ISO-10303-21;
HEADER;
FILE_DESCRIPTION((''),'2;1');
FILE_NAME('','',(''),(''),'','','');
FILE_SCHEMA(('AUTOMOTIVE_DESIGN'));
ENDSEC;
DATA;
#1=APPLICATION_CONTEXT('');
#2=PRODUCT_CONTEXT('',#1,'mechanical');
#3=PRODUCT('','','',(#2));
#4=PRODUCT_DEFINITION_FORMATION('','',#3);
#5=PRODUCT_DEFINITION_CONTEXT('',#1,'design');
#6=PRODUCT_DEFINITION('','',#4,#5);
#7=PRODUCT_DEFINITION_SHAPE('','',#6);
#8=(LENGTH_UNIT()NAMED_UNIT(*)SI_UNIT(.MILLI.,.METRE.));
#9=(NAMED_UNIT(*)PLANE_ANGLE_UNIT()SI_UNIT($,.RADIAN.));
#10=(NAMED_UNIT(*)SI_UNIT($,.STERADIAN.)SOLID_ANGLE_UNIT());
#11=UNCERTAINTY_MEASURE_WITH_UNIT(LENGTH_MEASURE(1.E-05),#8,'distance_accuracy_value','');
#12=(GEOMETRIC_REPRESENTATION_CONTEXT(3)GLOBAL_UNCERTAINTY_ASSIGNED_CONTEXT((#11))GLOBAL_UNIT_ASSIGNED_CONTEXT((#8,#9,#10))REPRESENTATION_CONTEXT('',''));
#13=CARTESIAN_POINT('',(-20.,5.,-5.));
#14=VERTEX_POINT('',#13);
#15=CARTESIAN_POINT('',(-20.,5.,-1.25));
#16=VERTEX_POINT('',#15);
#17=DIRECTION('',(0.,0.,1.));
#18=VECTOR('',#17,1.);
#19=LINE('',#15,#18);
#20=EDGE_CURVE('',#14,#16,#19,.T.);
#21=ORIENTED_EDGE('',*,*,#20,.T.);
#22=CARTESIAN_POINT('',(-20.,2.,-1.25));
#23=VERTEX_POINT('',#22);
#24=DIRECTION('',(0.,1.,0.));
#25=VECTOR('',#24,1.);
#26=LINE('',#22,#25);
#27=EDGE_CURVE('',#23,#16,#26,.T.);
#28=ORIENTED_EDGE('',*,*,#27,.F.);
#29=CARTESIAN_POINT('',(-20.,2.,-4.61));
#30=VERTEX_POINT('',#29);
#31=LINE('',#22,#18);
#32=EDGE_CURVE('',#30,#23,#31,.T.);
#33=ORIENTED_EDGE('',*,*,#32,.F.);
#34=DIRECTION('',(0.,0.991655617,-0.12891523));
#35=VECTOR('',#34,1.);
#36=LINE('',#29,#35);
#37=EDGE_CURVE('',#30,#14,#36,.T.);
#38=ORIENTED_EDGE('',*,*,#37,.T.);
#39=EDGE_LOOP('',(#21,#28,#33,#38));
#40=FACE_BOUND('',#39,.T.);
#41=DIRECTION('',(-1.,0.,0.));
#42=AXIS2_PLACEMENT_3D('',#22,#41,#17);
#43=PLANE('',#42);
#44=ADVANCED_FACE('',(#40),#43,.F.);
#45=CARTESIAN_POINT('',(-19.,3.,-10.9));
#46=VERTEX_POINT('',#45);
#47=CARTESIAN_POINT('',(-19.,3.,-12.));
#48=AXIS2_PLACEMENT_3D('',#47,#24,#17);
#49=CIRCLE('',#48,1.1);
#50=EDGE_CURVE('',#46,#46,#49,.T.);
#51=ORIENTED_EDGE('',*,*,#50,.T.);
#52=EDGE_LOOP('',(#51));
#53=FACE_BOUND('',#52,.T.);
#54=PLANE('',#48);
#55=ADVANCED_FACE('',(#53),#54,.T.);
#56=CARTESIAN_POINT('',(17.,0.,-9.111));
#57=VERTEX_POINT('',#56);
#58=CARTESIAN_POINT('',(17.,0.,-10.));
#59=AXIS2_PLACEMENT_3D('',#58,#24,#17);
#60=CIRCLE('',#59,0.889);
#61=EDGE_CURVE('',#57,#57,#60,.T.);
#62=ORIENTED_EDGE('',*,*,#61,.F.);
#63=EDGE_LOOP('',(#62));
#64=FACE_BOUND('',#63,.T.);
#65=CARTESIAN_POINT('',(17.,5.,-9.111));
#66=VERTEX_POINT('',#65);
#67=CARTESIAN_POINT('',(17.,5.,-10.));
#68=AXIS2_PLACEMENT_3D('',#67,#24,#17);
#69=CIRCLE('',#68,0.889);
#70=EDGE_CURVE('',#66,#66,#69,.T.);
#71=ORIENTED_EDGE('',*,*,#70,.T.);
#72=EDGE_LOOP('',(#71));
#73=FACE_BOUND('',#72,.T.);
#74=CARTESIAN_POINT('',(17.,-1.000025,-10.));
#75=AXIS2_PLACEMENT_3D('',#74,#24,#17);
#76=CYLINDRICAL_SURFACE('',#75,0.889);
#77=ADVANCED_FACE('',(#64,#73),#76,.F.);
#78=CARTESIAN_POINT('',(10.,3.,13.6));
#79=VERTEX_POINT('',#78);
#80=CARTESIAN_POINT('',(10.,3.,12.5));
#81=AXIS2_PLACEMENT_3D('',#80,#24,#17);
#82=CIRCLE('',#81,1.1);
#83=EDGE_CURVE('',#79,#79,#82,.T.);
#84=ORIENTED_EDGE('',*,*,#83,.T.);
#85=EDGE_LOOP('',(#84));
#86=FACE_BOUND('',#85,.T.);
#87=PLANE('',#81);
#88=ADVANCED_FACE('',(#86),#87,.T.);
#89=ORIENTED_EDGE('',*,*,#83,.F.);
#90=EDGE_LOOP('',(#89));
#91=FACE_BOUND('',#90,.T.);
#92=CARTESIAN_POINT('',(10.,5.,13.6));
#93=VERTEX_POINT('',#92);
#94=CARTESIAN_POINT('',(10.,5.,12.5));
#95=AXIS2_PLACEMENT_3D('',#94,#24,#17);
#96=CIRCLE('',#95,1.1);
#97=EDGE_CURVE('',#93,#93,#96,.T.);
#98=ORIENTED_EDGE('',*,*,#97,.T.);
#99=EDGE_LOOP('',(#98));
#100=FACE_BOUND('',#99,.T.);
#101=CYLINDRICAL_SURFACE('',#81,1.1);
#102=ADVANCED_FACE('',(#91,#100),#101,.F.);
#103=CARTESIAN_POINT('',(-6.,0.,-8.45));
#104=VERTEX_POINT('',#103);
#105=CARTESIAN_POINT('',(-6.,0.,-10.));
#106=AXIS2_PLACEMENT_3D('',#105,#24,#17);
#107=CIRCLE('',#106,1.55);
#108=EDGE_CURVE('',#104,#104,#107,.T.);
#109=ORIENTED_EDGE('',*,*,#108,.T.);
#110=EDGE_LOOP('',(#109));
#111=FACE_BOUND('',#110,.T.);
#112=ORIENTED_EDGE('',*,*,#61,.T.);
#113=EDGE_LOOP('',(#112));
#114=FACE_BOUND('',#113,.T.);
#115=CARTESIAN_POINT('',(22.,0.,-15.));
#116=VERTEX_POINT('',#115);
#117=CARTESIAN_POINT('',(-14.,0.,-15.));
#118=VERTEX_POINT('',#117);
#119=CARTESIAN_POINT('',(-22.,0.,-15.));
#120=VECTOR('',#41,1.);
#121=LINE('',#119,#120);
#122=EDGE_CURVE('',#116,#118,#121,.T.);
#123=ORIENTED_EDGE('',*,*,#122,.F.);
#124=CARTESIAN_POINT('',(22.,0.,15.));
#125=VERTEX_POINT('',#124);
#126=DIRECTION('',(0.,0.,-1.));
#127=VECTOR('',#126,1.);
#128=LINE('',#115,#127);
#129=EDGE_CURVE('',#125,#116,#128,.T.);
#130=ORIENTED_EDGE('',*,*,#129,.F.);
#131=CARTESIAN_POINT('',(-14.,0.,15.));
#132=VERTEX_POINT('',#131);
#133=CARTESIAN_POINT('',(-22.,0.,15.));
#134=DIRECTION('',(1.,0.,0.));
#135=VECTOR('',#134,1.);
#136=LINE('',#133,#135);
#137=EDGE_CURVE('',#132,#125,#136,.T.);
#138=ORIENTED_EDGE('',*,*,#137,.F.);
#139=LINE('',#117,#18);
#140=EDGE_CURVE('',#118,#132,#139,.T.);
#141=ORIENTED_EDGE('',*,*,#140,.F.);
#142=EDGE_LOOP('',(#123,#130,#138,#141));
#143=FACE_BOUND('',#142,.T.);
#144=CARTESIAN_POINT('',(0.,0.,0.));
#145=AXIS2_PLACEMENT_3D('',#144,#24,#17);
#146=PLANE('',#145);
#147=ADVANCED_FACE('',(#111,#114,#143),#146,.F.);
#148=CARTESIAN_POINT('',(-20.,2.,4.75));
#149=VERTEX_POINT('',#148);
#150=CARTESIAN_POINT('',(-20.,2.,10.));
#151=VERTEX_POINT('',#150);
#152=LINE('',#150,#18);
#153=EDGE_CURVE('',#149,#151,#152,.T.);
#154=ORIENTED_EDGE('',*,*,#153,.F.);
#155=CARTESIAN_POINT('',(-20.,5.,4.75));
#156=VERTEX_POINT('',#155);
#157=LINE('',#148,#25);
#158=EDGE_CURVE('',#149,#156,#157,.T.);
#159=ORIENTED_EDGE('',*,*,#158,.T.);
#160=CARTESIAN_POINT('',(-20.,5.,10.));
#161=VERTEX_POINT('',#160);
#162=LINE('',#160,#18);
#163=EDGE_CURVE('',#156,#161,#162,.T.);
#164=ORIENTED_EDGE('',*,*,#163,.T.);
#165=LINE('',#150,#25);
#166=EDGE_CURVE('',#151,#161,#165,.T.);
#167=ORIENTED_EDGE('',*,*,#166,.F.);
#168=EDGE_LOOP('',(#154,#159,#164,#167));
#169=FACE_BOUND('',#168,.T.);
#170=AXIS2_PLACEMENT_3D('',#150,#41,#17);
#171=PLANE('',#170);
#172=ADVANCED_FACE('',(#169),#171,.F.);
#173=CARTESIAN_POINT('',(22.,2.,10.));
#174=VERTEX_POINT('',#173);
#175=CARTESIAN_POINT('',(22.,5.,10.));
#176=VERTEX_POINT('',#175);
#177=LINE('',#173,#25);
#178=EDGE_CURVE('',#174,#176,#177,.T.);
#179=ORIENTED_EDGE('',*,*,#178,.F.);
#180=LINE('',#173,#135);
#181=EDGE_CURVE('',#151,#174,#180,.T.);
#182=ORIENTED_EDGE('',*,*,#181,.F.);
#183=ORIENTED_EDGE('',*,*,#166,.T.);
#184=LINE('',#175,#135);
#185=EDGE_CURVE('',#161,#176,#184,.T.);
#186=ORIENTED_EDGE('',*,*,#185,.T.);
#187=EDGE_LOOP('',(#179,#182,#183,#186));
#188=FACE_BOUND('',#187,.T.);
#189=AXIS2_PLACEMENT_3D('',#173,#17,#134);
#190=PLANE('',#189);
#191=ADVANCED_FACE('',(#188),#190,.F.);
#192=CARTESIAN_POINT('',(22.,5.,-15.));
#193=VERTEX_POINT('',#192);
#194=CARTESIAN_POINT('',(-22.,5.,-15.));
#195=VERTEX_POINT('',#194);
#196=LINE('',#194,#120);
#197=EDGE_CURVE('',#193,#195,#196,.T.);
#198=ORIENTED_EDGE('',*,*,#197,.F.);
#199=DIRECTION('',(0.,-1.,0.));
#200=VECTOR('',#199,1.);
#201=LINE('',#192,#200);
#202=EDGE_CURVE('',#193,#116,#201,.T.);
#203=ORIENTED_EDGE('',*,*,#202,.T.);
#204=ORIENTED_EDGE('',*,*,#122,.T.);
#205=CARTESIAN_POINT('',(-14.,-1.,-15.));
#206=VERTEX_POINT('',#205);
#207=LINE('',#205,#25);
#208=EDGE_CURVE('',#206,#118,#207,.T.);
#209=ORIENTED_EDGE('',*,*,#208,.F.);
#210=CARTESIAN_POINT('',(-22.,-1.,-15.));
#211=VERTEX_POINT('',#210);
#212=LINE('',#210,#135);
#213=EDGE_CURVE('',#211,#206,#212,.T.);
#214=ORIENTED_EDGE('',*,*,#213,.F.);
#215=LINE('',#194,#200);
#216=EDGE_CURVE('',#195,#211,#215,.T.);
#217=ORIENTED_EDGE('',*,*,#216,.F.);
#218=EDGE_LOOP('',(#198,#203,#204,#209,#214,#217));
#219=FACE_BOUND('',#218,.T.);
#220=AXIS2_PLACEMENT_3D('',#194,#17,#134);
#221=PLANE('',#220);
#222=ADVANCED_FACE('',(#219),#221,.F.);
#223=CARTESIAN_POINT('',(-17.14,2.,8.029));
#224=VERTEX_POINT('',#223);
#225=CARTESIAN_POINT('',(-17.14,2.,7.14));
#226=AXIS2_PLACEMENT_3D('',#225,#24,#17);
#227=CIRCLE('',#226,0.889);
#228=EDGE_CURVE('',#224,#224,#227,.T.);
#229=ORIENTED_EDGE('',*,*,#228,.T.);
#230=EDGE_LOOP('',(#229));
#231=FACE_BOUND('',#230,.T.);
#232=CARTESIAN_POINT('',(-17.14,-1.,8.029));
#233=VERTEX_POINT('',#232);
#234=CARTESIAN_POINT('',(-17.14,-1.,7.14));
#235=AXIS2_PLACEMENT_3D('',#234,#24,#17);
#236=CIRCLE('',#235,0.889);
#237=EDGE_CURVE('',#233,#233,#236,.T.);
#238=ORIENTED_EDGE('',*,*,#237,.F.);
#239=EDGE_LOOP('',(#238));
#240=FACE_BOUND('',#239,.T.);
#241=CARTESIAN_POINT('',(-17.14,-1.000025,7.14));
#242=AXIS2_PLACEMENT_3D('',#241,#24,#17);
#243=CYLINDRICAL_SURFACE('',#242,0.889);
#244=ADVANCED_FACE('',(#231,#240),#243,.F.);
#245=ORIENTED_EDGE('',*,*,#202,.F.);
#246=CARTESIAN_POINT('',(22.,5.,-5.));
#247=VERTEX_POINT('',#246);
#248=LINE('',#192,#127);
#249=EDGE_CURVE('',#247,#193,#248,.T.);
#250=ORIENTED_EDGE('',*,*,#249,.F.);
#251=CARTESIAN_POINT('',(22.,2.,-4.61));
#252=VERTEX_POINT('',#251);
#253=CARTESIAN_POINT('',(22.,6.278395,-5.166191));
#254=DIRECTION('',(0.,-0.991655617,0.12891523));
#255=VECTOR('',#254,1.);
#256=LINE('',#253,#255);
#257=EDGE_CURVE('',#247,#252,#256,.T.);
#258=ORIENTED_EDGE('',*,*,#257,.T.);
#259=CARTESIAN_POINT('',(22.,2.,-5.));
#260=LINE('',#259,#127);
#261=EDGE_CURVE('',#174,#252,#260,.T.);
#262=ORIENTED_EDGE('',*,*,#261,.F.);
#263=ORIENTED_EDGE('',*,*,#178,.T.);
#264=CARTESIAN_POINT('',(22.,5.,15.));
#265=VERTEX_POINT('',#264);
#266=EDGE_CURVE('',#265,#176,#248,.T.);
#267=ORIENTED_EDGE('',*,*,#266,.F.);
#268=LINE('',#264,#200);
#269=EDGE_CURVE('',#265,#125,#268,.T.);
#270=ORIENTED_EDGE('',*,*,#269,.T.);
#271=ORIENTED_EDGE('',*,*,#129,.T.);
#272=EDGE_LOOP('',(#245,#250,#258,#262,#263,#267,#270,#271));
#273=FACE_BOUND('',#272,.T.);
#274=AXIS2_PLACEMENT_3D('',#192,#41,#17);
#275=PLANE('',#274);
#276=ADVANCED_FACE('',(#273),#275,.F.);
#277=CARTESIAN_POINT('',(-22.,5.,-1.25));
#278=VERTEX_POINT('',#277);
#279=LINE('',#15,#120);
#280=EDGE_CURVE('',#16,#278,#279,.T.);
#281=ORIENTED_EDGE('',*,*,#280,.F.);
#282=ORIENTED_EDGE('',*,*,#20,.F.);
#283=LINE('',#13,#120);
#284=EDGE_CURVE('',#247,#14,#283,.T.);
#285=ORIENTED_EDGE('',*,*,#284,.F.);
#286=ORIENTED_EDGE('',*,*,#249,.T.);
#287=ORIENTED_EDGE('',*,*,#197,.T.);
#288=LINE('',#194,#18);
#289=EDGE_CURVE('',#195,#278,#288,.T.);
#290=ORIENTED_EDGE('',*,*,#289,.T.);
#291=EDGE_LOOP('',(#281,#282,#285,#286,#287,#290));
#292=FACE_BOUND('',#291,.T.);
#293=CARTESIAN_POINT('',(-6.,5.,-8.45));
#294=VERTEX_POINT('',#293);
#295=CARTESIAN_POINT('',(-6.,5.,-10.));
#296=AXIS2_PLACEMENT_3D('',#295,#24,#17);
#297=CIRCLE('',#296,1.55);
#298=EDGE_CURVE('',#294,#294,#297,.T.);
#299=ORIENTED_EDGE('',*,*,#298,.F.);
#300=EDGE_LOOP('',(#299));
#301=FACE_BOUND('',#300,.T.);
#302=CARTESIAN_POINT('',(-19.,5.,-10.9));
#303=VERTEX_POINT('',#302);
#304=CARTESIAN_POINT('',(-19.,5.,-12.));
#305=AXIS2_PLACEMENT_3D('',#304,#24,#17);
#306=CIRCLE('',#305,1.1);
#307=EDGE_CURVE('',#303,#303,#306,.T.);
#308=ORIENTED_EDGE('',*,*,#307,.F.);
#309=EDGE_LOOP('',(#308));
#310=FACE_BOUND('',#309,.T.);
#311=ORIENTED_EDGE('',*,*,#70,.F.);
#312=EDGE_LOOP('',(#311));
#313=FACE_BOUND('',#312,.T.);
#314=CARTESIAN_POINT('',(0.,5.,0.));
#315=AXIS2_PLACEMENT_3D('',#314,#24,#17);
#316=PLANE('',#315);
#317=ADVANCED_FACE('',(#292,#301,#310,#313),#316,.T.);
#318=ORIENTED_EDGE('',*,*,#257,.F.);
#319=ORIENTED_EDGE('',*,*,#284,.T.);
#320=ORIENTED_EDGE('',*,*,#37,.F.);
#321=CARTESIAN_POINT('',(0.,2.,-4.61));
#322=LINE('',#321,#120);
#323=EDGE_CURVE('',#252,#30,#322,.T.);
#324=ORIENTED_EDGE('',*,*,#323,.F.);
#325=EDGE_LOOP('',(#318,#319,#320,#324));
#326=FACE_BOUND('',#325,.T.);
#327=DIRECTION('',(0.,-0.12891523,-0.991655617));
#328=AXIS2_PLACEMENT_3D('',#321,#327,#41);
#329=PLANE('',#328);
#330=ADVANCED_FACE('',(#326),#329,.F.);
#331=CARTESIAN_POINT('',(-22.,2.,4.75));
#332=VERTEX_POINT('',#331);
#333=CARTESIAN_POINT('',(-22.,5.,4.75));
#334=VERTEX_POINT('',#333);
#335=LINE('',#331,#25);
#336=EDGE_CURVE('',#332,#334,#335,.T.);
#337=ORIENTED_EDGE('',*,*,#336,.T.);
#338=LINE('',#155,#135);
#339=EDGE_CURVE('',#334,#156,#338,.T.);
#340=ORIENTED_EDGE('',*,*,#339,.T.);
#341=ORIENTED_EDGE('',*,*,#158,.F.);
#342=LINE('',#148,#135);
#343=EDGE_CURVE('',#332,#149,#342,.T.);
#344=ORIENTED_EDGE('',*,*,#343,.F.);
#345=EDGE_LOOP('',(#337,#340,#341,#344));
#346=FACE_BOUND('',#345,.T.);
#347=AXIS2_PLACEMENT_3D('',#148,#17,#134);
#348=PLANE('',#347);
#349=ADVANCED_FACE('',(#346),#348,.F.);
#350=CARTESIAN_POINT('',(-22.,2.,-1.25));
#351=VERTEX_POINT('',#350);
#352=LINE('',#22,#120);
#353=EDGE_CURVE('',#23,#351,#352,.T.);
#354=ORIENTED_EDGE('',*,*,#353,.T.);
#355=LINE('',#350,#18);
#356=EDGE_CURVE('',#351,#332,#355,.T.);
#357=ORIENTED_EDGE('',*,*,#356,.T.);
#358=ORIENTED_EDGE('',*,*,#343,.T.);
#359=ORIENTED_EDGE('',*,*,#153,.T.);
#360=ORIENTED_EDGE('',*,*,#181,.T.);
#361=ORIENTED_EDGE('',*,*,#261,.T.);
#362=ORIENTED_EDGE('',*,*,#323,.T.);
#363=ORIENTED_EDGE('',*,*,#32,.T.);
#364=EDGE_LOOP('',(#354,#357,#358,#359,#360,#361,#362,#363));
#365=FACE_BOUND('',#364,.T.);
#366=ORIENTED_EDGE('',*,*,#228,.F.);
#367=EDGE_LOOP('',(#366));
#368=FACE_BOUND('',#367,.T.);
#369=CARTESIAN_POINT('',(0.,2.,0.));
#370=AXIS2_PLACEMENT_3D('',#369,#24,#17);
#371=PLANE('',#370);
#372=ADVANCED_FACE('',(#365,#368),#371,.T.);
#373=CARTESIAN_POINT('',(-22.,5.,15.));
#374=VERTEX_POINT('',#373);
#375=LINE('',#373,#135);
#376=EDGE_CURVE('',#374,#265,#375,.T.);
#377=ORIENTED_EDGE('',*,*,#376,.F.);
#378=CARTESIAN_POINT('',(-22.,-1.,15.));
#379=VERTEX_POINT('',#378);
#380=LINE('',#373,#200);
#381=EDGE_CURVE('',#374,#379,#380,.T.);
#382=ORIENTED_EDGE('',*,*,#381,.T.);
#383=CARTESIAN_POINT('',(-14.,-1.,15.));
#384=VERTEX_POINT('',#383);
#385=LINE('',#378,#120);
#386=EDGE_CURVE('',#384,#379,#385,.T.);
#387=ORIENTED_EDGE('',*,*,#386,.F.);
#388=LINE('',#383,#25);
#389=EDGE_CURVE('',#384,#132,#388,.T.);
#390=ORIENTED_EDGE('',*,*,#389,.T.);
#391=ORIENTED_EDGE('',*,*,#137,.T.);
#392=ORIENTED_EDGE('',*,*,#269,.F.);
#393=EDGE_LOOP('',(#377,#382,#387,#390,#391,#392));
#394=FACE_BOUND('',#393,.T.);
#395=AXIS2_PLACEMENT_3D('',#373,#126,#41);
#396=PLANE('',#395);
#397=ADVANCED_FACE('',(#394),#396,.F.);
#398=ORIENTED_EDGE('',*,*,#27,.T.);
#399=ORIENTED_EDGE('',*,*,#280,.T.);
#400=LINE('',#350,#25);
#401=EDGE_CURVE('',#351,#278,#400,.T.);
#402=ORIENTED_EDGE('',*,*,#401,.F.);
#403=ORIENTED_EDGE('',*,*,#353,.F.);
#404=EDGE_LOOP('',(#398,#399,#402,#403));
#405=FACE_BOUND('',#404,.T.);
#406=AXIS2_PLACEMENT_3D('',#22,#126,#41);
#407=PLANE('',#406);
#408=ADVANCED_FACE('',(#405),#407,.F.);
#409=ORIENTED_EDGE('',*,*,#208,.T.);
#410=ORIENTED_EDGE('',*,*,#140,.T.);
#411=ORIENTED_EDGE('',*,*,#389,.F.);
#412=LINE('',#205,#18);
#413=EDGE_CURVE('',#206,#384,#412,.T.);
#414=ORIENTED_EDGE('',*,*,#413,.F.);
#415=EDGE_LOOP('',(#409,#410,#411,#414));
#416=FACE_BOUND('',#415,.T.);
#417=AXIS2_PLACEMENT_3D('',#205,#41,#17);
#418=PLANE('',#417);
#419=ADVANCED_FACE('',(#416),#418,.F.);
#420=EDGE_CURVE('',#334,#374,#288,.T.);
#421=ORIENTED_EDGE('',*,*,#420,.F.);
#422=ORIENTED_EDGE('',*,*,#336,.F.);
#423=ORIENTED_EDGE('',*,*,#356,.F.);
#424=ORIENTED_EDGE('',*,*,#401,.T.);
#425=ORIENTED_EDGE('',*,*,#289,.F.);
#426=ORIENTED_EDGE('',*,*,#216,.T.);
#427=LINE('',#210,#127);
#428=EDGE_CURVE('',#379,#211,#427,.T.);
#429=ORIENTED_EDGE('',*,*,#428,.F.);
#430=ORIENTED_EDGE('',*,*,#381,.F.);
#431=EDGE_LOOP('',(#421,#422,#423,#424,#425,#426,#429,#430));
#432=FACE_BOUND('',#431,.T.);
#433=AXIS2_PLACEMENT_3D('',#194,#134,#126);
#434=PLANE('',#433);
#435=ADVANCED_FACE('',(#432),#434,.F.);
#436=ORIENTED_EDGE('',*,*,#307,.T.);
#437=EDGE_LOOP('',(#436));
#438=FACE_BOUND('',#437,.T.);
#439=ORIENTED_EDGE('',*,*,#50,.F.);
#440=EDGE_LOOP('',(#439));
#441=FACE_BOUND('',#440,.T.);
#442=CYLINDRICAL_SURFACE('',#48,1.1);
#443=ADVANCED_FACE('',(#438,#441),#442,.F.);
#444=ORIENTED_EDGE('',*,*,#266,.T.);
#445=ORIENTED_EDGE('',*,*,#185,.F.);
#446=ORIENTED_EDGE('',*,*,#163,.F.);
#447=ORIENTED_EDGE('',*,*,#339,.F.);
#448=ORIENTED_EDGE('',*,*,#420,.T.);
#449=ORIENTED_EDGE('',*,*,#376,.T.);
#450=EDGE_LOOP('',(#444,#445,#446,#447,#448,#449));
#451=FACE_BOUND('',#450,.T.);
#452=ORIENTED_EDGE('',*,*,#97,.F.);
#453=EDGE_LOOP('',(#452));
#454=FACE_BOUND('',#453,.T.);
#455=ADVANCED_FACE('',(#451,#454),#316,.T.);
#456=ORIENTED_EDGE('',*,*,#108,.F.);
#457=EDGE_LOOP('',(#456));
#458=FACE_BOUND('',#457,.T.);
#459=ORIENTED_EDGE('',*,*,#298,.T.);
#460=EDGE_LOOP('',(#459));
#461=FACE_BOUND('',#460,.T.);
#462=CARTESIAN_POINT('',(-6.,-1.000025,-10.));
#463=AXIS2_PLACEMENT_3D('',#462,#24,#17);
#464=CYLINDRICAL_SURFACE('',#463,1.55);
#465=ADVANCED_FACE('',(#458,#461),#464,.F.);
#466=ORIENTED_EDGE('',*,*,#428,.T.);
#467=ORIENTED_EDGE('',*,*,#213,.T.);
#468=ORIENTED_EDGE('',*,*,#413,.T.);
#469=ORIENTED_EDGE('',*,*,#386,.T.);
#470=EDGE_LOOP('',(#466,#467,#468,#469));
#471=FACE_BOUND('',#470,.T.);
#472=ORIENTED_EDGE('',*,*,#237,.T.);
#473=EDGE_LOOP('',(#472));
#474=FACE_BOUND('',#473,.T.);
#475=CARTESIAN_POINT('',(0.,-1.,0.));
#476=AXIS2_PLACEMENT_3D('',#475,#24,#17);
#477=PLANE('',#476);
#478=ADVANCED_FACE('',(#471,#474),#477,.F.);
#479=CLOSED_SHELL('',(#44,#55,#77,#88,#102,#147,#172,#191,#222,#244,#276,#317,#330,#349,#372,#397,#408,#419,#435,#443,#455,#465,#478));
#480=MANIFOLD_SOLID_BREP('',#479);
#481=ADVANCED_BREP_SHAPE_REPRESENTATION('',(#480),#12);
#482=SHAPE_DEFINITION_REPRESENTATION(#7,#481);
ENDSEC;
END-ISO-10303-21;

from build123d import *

# Parameters (mm, degrees)
SKETCH1_W           = 44
SKETCH1_H           = 30
BOSS_EXTRUDE1_DEPTH = 5
SKETCH2_W           = 8
SKETCH2_H           = 30
BOSS_EXTRUDE2_DEPTH = 1
SKETCH3_R           = 1.55
CUT_EXTRUDE1_DEPTH  = 28.294688128
CUT_EXTRUDE2_DEPTH  = 3
SKETCH7_R           = 1.1
CUT_EXTRUDE4_DEPTH  = 2
SKETCH5_R           = 0.889
CUT_EXTRUDE5_DEPTH  = 27.795522014
SKETCH6_R           = 0.889
CUT_EXTRUDE6_DEPTH  = 28.294688128
CHAMFER2_SIZE       = 3
CHAMFER2_SIZE_2     = 0.39


with BuildPart() as part:
    # Sketch1 → Boss-Extrude1 (new body)
    with BuildSketch(Plane(origin=(0, 0, 0), x_dir=(1, 0, 0), z_dir=(0, 1, 0))):
        Rectangle(SKETCH1_W, SKETCH1_H)
    extrude(amount=BOSS_EXTRUDE1_DEPTH)

    # Sketch2 → Boss-Extrude2 (add)
    with BuildSketch(Plane.XZ):
        with Locations((-18, 0)):
            Rectangle(SKETCH2_W, SKETCH2_H)
    extrude(amount=BOSS_EXTRUDE2_DEPTH)

    # Sketch3 → Cut-Extrude1 (cut, through all)
    with BuildSketch(Plane(origin=(0, 5, 0), x_dir=(1, 0, 0), z_dir=(0, 1, 0))):
        with Locations(Location((-6, 10, 0), (0, 0, 270))):
            Circle(SKETCH3_R)
    extrude(amount=-CUT_EXTRUDE1_DEPTH, mode=Mode.SUBTRACT)

    # Sketch4 → Cut-Extrude2 (cut)
    with BuildSketch(Plane(origin=(0, 5, 0), x_dir=(1, 0, 0), z_dir=(0, 1, 0))):
        Polygon((22, -10), (-20, -10), (-20, -4.75), (-22, -4.75), (-22, 1.25), (-20, 1.25), (-20, 5), (22, 5), align=None)
    extrude(amount=-CUT_EXTRUDE2_DEPTH, mode=Mode.SUBTRACT)

    # Sketch7 → Cut-Extrude4 (cut)
    with BuildSketch(Plane(origin=(0, 5, 0), x_dir=(1, 0, 0), z_dir=(0, 1, 0))):
        with Locations(Location((-19, 12, 0), (0, 0, 270))):
            Circle(SKETCH7_R)
        with Locations(Location((10, -12.5, 0), (0, 0, 270))):
            Circle(SKETCH7_R)
    extrude(amount=-CUT_EXTRUDE4_DEPTH, mode=Mode.SUBTRACT)

    # Sketch5 → Cut-Extrude5 (cut, through all)
    with BuildSketch(Plane(origin=(0, 2, 0), x_dir=(1, 0, 0), z_dir=(0, 1, 0))):
        with Locations(Location((-17.14, -7.14, 0), (0, 0, 270))):
            Circle(SKETCH5_R)
    extrude(amount=-CUT_EXTRUDE5_DEPTH, mode=Mode.SUBTRACT)

    # Sketch6 → Cut-Extrude6 (cut, through all)
    with BuildSketch(Plane(origin=(0, 5, 0), x_dir=(1, 0, 0), z_dir=(0, 1, 0))):
        with Locations(Location((17, 10, 0), (0, 0, 270))):
            Circle(SKETCH6_R)
    extrude(amount=-CUT_EXTRUDE6_DEPTH, mode=Mode.SUBTRACT)

    # Chamfer2
    # the kernel refuses this chamfer: 3, 0.39 mm, written as the material it adds along each edge
    with BuildSketch(Plane(origin=(-20, 2, -5), x_dir=(0, 0.9999877000722414, -0.004959808890380354), z_dir=(1, 0, 0))) as chamfer2_piece_1_section:
        Polygon((CHAMFER2_SIZE * 0.999987700072, CHAMFER2_SIZE * 0.00495980889038), (-CHAMFER2_SIZE_2 * 0.00495980889038, CHAMFER2_SIZE_2 * 0.999987700072), (0, 0), align=None)
    chamfer2_piece_1 = extrude(amount=42, mode=Mode.PRIVATE)
    chamfer2_piece_1 = split(chamfer2_piece_1, bisect_by=Plane(origin=(1, 5, -4.903199608), z_dir=(0, -1, 0)), keep=Keep.TOP, mode=Mode.PRIVATE)
    add(chamfer2_piece_1)


solid = part.part
